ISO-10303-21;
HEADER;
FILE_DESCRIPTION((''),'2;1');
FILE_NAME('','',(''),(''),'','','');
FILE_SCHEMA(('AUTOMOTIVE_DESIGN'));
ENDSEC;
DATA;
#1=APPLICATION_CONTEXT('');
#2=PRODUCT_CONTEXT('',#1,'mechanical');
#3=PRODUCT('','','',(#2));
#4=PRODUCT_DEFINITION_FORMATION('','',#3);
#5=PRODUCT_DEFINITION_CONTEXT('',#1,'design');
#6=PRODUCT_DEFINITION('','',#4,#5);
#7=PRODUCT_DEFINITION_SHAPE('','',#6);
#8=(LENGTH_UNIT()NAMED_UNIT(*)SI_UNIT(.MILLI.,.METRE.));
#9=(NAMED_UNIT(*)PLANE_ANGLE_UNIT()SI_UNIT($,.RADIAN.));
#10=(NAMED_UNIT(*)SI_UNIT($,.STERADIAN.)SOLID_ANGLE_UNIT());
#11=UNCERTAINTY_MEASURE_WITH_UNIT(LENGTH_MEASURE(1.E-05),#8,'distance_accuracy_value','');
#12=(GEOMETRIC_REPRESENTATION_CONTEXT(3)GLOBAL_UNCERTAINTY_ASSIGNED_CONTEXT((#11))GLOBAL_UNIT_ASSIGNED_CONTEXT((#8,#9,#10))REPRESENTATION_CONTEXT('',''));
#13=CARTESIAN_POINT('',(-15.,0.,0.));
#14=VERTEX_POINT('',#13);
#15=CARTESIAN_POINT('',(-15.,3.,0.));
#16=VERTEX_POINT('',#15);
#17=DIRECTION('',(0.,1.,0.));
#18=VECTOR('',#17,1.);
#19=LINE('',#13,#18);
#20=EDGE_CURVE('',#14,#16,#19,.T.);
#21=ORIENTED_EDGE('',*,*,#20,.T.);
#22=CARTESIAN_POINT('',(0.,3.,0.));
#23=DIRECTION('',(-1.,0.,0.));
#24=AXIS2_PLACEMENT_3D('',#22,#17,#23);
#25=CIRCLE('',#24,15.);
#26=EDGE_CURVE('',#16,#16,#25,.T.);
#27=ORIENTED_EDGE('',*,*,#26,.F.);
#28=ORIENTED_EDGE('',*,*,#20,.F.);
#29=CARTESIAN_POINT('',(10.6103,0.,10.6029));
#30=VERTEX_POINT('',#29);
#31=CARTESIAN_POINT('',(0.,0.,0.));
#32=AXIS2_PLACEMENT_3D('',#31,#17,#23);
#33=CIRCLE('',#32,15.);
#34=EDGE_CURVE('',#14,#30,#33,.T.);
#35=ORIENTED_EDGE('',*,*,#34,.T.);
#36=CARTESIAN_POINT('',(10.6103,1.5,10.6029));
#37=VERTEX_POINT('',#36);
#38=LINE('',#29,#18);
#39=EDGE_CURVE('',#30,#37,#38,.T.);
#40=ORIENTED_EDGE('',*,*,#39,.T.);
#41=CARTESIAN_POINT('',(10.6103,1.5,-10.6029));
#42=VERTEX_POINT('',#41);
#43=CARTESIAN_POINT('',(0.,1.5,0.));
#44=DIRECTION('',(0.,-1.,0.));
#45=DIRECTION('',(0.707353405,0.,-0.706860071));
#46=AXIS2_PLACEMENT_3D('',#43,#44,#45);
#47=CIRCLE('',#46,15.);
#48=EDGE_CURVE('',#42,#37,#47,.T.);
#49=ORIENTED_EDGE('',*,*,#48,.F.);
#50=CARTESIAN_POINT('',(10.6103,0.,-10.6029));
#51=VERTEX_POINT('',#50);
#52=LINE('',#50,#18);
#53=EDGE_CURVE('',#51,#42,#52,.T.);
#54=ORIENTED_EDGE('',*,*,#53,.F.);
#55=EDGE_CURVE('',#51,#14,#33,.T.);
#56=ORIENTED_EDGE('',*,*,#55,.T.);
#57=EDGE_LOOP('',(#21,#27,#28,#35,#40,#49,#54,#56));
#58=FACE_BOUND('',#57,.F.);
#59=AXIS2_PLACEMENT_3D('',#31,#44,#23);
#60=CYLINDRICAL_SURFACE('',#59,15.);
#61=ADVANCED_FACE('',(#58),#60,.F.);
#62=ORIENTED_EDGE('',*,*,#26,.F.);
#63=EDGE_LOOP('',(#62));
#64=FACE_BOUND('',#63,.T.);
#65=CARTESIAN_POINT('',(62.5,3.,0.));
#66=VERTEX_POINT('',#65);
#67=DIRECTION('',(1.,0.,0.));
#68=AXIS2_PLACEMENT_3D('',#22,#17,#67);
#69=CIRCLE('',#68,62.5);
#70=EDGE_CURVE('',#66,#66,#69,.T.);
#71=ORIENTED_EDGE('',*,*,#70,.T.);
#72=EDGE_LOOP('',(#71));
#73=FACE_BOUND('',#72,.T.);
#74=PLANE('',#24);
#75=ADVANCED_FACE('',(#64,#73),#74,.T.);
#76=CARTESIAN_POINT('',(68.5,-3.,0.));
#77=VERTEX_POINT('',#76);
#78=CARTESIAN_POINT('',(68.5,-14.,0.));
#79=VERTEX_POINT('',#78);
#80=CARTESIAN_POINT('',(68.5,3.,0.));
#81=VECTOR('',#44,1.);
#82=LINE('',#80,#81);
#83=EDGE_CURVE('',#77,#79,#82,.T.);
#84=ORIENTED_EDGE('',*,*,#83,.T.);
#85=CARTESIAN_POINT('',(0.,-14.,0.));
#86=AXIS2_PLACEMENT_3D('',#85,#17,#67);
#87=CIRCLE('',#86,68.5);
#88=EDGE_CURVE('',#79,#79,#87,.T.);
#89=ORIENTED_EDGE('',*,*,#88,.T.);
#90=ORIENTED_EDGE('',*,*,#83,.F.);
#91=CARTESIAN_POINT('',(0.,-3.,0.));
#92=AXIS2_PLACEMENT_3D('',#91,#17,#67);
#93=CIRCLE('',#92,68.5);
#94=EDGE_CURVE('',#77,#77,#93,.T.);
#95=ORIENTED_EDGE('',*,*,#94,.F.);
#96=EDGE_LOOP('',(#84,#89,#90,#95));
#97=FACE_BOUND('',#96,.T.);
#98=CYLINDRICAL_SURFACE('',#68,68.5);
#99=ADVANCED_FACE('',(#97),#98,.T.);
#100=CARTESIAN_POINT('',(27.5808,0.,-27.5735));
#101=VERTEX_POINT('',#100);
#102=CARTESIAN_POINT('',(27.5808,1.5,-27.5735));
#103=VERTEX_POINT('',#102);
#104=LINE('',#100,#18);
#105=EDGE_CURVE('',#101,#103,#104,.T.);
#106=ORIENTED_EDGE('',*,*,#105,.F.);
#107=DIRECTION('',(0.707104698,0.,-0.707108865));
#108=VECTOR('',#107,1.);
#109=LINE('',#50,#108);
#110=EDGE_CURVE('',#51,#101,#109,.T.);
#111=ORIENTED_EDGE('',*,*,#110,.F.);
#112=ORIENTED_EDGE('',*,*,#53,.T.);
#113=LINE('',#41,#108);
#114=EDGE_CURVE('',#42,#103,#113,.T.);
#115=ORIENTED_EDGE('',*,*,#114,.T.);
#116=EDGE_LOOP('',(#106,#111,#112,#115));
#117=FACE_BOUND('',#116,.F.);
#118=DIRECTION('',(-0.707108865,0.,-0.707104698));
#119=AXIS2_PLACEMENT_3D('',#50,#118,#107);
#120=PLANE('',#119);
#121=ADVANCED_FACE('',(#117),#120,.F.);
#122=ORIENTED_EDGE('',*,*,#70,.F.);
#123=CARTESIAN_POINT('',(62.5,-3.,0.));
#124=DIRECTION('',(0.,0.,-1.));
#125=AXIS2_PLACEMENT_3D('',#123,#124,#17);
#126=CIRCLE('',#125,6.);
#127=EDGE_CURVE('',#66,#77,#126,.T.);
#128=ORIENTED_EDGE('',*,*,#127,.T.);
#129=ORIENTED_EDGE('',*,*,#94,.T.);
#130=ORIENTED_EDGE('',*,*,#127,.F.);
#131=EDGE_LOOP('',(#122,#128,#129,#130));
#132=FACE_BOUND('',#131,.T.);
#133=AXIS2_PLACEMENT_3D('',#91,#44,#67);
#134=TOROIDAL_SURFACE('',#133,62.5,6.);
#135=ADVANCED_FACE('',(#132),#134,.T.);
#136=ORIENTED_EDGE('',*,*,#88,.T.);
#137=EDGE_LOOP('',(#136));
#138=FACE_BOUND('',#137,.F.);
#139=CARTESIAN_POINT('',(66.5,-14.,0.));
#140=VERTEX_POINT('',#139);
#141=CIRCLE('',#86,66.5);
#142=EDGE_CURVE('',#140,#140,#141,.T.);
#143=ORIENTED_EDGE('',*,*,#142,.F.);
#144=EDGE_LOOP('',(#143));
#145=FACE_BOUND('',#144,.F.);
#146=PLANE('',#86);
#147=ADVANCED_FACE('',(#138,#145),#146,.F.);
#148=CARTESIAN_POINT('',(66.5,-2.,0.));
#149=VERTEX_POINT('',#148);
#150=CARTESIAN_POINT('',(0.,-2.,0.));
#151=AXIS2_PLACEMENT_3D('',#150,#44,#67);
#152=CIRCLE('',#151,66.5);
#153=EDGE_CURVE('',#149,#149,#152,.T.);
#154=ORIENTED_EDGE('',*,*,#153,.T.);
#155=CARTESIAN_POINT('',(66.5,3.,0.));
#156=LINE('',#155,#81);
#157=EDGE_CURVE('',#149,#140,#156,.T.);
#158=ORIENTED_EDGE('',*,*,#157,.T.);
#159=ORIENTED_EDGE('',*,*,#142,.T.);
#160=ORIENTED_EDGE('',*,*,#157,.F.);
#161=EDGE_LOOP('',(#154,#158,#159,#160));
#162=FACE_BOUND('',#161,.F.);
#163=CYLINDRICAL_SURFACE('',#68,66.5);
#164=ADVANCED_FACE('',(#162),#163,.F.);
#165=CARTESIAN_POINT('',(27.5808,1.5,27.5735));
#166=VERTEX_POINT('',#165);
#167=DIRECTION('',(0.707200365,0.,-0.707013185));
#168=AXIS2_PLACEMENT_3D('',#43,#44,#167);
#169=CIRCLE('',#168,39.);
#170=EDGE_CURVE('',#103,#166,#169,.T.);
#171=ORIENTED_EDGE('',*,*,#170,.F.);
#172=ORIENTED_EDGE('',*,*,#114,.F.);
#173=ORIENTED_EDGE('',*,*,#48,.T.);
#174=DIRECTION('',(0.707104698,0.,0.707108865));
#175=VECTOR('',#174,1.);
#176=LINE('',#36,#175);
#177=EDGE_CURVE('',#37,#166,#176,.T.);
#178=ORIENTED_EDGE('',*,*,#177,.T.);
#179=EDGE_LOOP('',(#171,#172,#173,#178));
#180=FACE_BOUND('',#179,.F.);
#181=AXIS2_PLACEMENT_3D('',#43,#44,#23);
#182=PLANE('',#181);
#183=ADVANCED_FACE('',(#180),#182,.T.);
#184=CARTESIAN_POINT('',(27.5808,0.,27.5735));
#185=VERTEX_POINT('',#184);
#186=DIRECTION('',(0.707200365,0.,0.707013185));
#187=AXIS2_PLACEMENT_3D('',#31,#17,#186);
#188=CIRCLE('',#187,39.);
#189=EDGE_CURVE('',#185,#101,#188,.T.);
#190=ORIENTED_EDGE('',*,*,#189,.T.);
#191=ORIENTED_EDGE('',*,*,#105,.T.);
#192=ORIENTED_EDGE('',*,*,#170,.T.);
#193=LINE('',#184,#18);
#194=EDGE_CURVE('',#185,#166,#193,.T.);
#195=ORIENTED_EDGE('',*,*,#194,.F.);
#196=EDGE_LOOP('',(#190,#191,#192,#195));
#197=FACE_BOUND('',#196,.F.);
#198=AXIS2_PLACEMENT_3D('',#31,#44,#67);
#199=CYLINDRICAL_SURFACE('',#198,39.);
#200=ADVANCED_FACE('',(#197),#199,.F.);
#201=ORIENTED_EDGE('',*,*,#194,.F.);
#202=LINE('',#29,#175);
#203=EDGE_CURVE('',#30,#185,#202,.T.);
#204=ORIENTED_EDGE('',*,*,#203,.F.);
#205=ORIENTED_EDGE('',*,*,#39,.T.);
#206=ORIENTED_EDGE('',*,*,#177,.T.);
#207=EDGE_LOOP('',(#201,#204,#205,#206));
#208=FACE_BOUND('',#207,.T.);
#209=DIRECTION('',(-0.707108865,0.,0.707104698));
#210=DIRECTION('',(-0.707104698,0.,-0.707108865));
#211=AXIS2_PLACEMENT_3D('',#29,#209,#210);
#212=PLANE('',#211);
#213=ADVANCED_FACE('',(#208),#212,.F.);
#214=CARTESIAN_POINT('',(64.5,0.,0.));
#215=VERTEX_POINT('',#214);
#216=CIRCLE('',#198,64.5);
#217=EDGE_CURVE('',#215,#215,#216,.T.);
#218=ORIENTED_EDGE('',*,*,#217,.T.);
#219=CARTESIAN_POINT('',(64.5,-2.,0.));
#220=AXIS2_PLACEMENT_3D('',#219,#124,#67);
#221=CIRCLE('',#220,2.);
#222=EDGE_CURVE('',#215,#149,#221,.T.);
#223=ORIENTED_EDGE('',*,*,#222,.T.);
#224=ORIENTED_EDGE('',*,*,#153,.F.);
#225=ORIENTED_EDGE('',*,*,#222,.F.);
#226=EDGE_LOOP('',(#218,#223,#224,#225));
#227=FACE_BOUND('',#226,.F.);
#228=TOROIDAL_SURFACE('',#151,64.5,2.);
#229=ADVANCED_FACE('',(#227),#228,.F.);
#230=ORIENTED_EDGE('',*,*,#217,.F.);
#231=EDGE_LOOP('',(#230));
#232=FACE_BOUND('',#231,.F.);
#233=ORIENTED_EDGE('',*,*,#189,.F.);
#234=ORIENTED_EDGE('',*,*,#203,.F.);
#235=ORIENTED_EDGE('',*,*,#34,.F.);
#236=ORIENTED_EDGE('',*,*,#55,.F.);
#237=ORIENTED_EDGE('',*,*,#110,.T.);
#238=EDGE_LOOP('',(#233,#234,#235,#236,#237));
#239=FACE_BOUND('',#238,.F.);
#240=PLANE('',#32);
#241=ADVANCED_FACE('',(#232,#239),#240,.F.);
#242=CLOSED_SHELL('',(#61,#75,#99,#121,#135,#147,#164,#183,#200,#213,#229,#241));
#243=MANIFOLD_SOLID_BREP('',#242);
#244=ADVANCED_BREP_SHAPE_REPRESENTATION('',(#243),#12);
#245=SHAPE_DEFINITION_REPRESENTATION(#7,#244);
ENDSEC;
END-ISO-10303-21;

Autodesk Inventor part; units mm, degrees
ref_plane "YZ Plane" through (0, 0, 0) normal (1, 0, 0) x (0, 1, 0)
ref_plane "XZ Plane" through (0, 0, 0) normal (0, 1, 0) x (-1, 0, 0)
ref_plane "XY Plane" through (0, 0, 0) normal (0, 0, 1) x (1, 0, 0)
sketch "Sketch1" plane through (0, 0, 0) normal (0, 1, 0) x (-1, 0, 0)
  circle A0 centre (0, 0) radius 66.5
  circle A1 centre (0, 0) radius 15
  dimension "d0" = 133
  dimension "d3" = 30
extrude "Extrusion2" add sketch "Sketch1" along normal blind 3
sketch "Sketch3" plane through (0, 3, 0) normal (0, 1, 0) x (1, 0, 0)
  circle A0 centre (0, 0) radius 66.5
  circle A1 centre (0, 0) radius 68.5
  dimension "d6" = 133
  dimension "d7" = 137
extrude "Extrusion3" add sketch "Sketch3" against normal blind 17
sketch "Sketch4" plane through (0, 0, 0) normal (0, -1, 0) x (1, 0, 0)
  circle A0 centre (0, 0) radius 15
  circle A1 centre (0, 0) radius 39
  line L0 (10.6103, -10.6029) -> (27.5808, -27.5735)
  line L1 (39, 0) -> (15, 0)
  circle A2 centre (0, 0) radius 15 projected
  line L2 (27.7885, -27.3642) -> (10.8166, -10.3923)
  dimension "d10" = 30
  dimension "d11" = 24
extrude "Extrusion4" cut sketch "Sketch4" against normal blind 1.5 contours L1 A1 L2 A0 | A0 L2 A1 L0
mirror "Mirror1" about plane through (0, 0, 0) normal (0, 0, 1) of "Extrusion4"
fillet "Fillet1" radius 6 1 edges at (-68.5, 3, 0)
fillet "Fillet2" radius 2 1 edges at (-66.5, 0, 0)
properties part number "DireccionBase"
